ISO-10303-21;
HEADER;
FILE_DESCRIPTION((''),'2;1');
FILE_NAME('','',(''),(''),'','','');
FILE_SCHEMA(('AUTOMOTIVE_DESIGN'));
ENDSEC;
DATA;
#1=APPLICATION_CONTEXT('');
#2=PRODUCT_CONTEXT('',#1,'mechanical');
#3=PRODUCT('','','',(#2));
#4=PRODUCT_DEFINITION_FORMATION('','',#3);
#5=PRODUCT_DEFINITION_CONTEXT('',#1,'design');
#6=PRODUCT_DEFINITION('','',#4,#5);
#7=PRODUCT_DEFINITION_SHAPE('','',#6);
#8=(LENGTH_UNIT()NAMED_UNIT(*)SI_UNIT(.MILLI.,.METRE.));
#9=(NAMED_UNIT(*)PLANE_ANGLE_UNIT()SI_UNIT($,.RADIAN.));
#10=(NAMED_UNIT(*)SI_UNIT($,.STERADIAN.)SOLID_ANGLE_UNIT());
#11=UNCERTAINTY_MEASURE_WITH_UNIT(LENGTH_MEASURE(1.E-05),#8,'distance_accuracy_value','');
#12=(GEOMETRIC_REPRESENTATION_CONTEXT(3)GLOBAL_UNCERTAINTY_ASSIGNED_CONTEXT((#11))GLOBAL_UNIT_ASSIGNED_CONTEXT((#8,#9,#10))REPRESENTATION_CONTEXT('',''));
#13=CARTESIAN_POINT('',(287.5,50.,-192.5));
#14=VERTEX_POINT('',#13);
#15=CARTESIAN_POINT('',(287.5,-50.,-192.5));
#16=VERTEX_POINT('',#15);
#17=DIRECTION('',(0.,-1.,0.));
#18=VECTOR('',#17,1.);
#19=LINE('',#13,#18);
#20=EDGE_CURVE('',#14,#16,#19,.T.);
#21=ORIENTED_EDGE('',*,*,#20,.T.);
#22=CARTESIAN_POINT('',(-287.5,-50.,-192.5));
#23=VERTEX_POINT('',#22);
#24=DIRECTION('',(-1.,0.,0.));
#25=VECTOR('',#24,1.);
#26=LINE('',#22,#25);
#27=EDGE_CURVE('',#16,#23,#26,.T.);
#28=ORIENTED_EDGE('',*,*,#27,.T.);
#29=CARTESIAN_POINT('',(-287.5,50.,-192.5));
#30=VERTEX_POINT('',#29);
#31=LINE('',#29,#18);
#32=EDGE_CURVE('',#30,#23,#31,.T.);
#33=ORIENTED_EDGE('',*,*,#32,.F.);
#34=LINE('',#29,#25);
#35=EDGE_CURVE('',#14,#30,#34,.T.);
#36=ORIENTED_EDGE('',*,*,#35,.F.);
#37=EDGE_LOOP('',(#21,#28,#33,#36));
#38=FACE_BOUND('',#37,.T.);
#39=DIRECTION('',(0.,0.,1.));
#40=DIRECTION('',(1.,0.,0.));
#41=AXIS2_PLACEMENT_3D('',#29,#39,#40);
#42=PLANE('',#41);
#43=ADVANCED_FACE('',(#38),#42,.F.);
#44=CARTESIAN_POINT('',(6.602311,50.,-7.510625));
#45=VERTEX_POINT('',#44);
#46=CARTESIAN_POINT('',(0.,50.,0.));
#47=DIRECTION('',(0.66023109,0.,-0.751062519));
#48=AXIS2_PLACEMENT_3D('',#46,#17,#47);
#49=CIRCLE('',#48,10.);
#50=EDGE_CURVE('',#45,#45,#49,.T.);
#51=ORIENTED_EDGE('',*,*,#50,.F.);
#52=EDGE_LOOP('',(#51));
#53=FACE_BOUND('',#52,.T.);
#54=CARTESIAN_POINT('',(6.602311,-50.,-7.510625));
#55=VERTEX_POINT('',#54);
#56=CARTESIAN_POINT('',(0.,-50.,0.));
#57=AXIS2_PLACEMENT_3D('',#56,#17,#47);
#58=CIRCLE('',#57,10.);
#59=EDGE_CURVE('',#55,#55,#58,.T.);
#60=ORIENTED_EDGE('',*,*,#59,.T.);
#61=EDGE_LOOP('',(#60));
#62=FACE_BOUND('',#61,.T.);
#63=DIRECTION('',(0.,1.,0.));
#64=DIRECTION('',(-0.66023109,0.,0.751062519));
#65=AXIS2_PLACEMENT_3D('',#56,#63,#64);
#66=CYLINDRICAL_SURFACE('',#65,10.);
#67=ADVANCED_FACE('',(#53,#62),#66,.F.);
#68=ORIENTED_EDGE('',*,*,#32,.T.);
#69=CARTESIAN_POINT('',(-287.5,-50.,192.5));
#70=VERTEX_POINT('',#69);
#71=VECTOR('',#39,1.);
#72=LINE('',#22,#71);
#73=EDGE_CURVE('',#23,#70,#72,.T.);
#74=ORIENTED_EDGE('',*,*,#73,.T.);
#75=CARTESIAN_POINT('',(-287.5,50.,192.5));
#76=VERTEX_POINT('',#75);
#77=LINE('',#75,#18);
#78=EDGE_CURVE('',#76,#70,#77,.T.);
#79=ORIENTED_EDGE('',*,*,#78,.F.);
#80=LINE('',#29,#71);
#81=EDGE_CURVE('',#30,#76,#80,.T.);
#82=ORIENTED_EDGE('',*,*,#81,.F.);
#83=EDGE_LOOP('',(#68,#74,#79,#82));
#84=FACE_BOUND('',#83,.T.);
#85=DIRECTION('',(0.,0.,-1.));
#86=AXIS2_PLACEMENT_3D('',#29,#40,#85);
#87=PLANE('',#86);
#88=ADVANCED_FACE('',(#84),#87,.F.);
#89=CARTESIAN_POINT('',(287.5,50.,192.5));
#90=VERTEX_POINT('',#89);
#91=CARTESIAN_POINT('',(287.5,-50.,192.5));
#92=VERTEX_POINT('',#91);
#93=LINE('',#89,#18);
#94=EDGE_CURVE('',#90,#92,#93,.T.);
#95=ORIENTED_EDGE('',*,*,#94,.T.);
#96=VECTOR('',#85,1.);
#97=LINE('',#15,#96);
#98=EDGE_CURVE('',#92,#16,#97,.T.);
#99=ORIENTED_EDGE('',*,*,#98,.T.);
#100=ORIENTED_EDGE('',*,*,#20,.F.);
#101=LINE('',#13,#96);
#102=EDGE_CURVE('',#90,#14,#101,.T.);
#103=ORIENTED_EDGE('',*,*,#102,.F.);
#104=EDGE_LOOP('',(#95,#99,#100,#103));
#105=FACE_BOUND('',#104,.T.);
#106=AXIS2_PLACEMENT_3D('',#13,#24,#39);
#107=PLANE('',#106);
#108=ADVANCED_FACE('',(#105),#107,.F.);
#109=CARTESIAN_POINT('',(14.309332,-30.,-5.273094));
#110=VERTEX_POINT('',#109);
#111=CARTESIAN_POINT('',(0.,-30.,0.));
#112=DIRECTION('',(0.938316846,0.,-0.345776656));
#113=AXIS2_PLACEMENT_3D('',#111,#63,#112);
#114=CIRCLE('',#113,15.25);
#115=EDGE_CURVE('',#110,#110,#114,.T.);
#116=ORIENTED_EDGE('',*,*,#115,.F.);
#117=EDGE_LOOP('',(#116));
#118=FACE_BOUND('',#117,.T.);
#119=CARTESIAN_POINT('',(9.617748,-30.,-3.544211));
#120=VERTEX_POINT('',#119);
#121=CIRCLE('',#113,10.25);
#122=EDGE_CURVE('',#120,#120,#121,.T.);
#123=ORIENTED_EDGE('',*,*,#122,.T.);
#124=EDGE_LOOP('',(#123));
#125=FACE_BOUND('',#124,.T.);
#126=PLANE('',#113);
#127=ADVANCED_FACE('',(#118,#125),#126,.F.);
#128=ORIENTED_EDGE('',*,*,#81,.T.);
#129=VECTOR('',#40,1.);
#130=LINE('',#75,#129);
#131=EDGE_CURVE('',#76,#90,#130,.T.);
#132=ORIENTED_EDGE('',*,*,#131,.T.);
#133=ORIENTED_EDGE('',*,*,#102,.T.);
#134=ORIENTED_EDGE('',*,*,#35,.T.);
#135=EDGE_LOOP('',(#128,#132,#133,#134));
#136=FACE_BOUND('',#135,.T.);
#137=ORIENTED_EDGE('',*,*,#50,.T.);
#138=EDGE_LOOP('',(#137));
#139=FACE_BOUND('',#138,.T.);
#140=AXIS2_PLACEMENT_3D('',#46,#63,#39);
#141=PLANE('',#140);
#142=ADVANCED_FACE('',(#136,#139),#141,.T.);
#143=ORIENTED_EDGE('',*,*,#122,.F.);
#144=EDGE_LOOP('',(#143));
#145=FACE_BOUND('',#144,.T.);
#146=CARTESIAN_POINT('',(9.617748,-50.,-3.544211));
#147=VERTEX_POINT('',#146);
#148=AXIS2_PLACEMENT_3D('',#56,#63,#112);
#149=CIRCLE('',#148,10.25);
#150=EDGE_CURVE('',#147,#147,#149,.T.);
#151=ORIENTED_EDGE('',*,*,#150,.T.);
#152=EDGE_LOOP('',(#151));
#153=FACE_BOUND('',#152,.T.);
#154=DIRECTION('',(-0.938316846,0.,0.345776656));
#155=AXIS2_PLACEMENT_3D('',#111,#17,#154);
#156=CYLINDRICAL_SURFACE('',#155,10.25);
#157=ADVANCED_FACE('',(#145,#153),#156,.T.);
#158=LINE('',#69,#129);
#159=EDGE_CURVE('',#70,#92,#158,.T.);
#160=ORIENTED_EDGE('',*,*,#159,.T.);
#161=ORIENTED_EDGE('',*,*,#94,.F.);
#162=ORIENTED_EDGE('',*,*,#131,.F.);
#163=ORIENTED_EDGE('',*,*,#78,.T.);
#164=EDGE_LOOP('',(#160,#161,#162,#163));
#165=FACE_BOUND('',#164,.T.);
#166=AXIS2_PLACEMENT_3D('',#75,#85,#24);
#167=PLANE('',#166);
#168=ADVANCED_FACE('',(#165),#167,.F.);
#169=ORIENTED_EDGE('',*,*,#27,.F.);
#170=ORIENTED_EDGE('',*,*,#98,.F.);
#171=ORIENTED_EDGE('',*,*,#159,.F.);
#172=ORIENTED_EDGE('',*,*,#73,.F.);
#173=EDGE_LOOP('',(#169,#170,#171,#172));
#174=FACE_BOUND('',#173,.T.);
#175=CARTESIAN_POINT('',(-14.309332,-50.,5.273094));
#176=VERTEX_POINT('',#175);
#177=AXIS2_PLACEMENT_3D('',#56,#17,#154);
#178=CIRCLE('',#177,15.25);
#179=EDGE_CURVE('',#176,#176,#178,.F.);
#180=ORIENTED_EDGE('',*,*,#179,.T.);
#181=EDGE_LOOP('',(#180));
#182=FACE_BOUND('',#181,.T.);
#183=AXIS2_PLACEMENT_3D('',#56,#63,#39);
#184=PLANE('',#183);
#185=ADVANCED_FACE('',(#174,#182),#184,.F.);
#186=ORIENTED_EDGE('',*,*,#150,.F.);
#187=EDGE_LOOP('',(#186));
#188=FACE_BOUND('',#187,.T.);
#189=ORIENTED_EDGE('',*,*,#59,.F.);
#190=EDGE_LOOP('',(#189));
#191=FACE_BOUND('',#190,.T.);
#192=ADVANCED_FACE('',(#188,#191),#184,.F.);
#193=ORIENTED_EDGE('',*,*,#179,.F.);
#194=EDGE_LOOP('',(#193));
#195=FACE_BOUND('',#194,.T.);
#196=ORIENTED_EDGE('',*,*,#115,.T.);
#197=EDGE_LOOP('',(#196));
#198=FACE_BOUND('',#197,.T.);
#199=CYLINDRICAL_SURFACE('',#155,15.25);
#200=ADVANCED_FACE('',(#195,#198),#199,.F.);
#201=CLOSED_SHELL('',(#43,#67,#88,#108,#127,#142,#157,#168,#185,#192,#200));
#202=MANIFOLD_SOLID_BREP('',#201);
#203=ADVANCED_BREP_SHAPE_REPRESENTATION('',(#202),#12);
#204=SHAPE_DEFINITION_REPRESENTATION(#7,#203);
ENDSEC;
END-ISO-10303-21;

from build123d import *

# Parameters (mm, degrees)
SKETCH1_W             = 575
SKETCH1_H             = 385
BOSS_EXTRUDE1_DEPTH   = 50
CAVITY2_START         = -50
CAVITY2_OUTLINE_R     = 10
CAVITY2_DEPTH         = 100
CAVITY2_2_OUTLINE_R   = 15.25
CAVITY2_2_OUTLINE_R_2 = 10.25
CAVITY2_2_DEPTH       = 20


# Read off the part's stored shape, not the designer's step: Cavity2
with BuildPart() as part:
    # Sketch1 → Boss-Extrude1 (new, symmetric)
    with BuildSketch(Plane(origin=(0, 0, 0), x_dir=(1, 0, 0), z_dir=(0, 1, 0))):
        Rectangle(SKETCH1_W, SKETCH1_H)
    extrude(amount=BOSS_EXTRUDE1_DEPTH, both=True)

    # Cavity2 outline → Cavity2 (cut)
    with BuildSketch(Plane(origin=(0, 0, 0), x_dir=(1, 0, 0), z_dir=(0, 1, 0)).offset(CAVITY2_START)):
        Circle(CAVITY2_OUTLINE_R)
    extrude(amount=CAVITY2_DEPTH, mode=Mode.SUBTRACT)

    # Cavity2 2 outline → Cavity2 2 (cut)
    with BuildSketch(Plane(origin=(0, 0, 0), x_dir=(1, 0, 0), z_dir=(0, 1, 0)).offset(CAVITY2_START)):
        Circle(CAVITY2_2_OUTLINE_R)
        Circle(CAVITY2_2_OUTLINE_R_2, mode=Mode.SUBTRACT)
    extrude(amount=CAVITY2_2_DEPTH, mode=Mode.SUBTRACT)


solid = part.part
